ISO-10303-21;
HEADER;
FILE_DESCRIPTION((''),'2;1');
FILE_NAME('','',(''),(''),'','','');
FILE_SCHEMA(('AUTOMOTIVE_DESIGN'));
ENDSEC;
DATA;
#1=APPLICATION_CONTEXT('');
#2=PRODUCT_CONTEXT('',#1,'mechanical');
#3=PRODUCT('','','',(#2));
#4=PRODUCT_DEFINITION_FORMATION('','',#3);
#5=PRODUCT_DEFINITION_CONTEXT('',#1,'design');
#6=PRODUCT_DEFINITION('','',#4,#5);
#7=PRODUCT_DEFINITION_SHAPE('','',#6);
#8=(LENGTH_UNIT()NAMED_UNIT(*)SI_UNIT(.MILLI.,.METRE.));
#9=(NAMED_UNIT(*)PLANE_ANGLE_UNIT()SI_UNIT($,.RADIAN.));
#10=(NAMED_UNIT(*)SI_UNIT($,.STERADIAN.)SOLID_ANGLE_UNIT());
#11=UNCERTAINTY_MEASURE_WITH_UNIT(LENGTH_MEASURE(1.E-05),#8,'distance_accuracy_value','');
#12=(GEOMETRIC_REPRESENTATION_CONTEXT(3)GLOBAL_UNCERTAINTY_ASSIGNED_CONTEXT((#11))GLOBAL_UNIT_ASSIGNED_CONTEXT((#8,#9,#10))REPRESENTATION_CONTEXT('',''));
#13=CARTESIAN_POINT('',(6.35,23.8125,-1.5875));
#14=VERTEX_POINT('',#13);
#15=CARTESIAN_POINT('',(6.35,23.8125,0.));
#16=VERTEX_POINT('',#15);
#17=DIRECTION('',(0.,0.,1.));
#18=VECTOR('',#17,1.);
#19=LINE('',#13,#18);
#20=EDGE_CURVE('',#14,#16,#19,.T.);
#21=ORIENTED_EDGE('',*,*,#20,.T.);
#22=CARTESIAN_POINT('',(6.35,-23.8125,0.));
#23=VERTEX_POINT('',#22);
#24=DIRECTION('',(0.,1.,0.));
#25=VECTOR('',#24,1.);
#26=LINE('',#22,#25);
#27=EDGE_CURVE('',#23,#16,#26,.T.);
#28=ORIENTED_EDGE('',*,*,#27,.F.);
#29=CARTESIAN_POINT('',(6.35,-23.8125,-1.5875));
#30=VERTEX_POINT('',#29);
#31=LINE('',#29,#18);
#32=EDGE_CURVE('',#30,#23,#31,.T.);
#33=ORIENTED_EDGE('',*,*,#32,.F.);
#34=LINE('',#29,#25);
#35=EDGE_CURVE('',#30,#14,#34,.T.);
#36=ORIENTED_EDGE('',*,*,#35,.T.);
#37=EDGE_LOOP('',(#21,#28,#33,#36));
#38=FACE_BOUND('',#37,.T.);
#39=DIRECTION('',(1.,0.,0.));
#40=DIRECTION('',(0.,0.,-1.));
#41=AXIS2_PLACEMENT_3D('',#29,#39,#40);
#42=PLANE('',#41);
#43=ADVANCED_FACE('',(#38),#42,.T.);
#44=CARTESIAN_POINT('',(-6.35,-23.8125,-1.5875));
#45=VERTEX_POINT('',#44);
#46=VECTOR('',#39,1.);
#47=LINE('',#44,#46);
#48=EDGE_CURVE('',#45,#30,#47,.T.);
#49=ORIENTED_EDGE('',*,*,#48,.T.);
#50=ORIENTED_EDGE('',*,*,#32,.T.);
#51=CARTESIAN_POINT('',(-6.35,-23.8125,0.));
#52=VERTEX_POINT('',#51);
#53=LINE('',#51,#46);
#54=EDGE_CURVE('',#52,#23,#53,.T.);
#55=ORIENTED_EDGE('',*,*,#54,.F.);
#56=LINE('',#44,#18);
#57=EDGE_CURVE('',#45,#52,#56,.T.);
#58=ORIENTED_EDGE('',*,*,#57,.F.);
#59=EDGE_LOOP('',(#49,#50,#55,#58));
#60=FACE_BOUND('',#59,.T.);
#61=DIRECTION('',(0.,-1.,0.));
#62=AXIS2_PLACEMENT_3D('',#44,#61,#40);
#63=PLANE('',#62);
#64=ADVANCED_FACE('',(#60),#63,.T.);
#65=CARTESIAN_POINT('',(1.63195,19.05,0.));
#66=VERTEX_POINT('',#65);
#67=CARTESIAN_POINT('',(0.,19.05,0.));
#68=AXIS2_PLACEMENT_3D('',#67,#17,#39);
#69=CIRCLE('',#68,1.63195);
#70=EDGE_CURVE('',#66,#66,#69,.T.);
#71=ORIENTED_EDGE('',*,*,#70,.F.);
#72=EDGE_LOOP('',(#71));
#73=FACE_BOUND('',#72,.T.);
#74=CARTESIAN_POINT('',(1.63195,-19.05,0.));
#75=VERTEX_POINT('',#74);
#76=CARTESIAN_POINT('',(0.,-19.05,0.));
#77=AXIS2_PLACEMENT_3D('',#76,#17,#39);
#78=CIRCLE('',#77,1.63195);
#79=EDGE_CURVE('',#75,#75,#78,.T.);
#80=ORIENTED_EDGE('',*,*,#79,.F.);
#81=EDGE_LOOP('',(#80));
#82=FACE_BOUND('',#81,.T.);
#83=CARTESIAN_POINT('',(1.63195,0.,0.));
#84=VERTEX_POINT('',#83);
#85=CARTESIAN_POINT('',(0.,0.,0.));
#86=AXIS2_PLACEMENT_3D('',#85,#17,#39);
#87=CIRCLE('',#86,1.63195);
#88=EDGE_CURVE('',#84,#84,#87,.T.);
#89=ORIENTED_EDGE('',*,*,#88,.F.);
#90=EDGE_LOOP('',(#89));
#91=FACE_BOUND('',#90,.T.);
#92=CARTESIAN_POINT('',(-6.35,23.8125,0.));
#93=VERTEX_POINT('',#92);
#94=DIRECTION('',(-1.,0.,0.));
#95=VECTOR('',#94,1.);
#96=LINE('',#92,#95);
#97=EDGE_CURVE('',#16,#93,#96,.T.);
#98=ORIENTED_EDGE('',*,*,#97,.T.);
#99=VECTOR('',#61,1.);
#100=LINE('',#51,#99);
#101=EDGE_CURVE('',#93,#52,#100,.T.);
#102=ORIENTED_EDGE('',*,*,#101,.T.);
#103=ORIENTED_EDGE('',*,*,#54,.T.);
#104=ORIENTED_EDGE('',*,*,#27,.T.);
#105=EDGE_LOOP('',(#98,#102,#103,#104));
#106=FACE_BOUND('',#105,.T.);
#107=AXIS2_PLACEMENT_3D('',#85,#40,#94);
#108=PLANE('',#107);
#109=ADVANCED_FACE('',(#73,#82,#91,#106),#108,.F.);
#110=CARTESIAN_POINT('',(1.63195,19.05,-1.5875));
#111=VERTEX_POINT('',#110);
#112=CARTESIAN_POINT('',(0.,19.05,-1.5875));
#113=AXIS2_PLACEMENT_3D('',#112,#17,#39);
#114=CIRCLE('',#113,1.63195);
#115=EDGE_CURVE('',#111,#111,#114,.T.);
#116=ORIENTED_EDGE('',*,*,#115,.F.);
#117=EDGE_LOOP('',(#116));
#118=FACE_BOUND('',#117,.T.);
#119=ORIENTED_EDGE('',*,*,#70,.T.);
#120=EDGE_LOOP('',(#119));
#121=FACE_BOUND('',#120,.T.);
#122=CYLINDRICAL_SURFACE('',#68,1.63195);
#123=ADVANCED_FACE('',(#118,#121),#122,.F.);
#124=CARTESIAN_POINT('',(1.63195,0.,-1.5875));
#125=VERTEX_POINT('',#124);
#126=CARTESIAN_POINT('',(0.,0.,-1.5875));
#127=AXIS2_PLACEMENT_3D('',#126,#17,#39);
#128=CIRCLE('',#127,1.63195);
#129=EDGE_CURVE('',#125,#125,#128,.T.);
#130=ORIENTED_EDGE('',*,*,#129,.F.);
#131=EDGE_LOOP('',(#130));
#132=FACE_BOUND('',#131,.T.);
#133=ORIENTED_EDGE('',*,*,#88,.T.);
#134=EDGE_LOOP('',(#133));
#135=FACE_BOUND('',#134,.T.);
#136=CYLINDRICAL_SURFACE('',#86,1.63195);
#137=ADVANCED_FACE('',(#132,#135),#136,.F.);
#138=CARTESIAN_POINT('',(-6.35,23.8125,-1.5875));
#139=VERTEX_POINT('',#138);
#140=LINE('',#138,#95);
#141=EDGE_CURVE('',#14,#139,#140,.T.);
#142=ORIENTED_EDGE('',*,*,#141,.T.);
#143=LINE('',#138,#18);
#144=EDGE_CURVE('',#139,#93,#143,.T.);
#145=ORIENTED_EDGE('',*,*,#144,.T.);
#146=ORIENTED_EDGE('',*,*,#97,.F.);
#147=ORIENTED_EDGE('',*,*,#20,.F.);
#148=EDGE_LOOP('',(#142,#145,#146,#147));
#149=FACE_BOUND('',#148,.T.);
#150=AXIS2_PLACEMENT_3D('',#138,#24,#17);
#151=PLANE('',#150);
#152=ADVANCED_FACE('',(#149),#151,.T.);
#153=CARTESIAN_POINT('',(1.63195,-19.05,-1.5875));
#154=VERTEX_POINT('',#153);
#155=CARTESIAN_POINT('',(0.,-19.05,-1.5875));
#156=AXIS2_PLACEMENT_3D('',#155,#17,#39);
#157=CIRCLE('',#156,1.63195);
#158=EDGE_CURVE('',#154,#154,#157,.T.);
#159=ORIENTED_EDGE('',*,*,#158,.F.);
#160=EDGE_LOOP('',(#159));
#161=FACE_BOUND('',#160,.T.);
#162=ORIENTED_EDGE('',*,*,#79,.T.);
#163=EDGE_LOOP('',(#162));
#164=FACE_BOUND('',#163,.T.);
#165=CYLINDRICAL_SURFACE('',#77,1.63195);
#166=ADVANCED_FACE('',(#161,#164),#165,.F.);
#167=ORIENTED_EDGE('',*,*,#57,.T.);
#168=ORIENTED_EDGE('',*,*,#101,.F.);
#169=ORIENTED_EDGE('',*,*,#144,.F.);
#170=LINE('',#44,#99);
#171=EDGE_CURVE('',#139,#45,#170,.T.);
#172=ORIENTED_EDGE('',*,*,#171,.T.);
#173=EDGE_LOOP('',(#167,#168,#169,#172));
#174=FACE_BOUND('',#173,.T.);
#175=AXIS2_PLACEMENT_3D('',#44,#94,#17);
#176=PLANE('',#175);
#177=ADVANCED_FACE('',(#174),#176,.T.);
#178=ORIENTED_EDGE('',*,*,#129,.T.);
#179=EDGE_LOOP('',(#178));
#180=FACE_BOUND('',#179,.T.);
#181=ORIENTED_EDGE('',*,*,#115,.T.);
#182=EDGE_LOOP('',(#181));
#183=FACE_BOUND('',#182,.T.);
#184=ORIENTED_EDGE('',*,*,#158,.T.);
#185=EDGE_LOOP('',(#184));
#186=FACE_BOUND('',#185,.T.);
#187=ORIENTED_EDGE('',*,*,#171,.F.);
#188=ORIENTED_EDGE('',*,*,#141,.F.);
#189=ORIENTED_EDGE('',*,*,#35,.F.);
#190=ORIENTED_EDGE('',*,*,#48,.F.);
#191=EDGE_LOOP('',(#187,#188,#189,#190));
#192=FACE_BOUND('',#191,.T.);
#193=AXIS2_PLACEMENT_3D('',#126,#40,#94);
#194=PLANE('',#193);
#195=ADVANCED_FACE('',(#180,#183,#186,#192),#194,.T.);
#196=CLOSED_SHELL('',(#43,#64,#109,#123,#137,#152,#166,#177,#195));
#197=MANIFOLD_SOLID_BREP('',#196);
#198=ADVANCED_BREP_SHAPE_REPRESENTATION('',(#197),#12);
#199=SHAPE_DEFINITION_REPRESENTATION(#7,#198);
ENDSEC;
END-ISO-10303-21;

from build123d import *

# Parameters (mm, degrees)
SKETCH2_W             = 12.7
SKETCH2_H             = 47.625
BASE_FLANGE1_DEPTH    = 1.5875
F_4_CLEARANCE_HOLE1_D = 3.2639


# Sheet-metal steps are written as plain solids
with BuildPart() as part:
    # Sketch2 → Base-Flange1 (new body)
    with BuildSketch(Plane.XY):
        Rectangle(SKETCH2_W, SKETCH2_H)
    extrude(amount=-BASE_FLANGE1_DEPTH)

    # #4 Clearance Hole1 (through all)
    with Locations(Plane.XY):
        with Locations((0, 0), (0, 19.05), (0, -19.05)):
            Hole(F_4_CLEARANCE_HOLE1_D / 2)


solid = part.part
